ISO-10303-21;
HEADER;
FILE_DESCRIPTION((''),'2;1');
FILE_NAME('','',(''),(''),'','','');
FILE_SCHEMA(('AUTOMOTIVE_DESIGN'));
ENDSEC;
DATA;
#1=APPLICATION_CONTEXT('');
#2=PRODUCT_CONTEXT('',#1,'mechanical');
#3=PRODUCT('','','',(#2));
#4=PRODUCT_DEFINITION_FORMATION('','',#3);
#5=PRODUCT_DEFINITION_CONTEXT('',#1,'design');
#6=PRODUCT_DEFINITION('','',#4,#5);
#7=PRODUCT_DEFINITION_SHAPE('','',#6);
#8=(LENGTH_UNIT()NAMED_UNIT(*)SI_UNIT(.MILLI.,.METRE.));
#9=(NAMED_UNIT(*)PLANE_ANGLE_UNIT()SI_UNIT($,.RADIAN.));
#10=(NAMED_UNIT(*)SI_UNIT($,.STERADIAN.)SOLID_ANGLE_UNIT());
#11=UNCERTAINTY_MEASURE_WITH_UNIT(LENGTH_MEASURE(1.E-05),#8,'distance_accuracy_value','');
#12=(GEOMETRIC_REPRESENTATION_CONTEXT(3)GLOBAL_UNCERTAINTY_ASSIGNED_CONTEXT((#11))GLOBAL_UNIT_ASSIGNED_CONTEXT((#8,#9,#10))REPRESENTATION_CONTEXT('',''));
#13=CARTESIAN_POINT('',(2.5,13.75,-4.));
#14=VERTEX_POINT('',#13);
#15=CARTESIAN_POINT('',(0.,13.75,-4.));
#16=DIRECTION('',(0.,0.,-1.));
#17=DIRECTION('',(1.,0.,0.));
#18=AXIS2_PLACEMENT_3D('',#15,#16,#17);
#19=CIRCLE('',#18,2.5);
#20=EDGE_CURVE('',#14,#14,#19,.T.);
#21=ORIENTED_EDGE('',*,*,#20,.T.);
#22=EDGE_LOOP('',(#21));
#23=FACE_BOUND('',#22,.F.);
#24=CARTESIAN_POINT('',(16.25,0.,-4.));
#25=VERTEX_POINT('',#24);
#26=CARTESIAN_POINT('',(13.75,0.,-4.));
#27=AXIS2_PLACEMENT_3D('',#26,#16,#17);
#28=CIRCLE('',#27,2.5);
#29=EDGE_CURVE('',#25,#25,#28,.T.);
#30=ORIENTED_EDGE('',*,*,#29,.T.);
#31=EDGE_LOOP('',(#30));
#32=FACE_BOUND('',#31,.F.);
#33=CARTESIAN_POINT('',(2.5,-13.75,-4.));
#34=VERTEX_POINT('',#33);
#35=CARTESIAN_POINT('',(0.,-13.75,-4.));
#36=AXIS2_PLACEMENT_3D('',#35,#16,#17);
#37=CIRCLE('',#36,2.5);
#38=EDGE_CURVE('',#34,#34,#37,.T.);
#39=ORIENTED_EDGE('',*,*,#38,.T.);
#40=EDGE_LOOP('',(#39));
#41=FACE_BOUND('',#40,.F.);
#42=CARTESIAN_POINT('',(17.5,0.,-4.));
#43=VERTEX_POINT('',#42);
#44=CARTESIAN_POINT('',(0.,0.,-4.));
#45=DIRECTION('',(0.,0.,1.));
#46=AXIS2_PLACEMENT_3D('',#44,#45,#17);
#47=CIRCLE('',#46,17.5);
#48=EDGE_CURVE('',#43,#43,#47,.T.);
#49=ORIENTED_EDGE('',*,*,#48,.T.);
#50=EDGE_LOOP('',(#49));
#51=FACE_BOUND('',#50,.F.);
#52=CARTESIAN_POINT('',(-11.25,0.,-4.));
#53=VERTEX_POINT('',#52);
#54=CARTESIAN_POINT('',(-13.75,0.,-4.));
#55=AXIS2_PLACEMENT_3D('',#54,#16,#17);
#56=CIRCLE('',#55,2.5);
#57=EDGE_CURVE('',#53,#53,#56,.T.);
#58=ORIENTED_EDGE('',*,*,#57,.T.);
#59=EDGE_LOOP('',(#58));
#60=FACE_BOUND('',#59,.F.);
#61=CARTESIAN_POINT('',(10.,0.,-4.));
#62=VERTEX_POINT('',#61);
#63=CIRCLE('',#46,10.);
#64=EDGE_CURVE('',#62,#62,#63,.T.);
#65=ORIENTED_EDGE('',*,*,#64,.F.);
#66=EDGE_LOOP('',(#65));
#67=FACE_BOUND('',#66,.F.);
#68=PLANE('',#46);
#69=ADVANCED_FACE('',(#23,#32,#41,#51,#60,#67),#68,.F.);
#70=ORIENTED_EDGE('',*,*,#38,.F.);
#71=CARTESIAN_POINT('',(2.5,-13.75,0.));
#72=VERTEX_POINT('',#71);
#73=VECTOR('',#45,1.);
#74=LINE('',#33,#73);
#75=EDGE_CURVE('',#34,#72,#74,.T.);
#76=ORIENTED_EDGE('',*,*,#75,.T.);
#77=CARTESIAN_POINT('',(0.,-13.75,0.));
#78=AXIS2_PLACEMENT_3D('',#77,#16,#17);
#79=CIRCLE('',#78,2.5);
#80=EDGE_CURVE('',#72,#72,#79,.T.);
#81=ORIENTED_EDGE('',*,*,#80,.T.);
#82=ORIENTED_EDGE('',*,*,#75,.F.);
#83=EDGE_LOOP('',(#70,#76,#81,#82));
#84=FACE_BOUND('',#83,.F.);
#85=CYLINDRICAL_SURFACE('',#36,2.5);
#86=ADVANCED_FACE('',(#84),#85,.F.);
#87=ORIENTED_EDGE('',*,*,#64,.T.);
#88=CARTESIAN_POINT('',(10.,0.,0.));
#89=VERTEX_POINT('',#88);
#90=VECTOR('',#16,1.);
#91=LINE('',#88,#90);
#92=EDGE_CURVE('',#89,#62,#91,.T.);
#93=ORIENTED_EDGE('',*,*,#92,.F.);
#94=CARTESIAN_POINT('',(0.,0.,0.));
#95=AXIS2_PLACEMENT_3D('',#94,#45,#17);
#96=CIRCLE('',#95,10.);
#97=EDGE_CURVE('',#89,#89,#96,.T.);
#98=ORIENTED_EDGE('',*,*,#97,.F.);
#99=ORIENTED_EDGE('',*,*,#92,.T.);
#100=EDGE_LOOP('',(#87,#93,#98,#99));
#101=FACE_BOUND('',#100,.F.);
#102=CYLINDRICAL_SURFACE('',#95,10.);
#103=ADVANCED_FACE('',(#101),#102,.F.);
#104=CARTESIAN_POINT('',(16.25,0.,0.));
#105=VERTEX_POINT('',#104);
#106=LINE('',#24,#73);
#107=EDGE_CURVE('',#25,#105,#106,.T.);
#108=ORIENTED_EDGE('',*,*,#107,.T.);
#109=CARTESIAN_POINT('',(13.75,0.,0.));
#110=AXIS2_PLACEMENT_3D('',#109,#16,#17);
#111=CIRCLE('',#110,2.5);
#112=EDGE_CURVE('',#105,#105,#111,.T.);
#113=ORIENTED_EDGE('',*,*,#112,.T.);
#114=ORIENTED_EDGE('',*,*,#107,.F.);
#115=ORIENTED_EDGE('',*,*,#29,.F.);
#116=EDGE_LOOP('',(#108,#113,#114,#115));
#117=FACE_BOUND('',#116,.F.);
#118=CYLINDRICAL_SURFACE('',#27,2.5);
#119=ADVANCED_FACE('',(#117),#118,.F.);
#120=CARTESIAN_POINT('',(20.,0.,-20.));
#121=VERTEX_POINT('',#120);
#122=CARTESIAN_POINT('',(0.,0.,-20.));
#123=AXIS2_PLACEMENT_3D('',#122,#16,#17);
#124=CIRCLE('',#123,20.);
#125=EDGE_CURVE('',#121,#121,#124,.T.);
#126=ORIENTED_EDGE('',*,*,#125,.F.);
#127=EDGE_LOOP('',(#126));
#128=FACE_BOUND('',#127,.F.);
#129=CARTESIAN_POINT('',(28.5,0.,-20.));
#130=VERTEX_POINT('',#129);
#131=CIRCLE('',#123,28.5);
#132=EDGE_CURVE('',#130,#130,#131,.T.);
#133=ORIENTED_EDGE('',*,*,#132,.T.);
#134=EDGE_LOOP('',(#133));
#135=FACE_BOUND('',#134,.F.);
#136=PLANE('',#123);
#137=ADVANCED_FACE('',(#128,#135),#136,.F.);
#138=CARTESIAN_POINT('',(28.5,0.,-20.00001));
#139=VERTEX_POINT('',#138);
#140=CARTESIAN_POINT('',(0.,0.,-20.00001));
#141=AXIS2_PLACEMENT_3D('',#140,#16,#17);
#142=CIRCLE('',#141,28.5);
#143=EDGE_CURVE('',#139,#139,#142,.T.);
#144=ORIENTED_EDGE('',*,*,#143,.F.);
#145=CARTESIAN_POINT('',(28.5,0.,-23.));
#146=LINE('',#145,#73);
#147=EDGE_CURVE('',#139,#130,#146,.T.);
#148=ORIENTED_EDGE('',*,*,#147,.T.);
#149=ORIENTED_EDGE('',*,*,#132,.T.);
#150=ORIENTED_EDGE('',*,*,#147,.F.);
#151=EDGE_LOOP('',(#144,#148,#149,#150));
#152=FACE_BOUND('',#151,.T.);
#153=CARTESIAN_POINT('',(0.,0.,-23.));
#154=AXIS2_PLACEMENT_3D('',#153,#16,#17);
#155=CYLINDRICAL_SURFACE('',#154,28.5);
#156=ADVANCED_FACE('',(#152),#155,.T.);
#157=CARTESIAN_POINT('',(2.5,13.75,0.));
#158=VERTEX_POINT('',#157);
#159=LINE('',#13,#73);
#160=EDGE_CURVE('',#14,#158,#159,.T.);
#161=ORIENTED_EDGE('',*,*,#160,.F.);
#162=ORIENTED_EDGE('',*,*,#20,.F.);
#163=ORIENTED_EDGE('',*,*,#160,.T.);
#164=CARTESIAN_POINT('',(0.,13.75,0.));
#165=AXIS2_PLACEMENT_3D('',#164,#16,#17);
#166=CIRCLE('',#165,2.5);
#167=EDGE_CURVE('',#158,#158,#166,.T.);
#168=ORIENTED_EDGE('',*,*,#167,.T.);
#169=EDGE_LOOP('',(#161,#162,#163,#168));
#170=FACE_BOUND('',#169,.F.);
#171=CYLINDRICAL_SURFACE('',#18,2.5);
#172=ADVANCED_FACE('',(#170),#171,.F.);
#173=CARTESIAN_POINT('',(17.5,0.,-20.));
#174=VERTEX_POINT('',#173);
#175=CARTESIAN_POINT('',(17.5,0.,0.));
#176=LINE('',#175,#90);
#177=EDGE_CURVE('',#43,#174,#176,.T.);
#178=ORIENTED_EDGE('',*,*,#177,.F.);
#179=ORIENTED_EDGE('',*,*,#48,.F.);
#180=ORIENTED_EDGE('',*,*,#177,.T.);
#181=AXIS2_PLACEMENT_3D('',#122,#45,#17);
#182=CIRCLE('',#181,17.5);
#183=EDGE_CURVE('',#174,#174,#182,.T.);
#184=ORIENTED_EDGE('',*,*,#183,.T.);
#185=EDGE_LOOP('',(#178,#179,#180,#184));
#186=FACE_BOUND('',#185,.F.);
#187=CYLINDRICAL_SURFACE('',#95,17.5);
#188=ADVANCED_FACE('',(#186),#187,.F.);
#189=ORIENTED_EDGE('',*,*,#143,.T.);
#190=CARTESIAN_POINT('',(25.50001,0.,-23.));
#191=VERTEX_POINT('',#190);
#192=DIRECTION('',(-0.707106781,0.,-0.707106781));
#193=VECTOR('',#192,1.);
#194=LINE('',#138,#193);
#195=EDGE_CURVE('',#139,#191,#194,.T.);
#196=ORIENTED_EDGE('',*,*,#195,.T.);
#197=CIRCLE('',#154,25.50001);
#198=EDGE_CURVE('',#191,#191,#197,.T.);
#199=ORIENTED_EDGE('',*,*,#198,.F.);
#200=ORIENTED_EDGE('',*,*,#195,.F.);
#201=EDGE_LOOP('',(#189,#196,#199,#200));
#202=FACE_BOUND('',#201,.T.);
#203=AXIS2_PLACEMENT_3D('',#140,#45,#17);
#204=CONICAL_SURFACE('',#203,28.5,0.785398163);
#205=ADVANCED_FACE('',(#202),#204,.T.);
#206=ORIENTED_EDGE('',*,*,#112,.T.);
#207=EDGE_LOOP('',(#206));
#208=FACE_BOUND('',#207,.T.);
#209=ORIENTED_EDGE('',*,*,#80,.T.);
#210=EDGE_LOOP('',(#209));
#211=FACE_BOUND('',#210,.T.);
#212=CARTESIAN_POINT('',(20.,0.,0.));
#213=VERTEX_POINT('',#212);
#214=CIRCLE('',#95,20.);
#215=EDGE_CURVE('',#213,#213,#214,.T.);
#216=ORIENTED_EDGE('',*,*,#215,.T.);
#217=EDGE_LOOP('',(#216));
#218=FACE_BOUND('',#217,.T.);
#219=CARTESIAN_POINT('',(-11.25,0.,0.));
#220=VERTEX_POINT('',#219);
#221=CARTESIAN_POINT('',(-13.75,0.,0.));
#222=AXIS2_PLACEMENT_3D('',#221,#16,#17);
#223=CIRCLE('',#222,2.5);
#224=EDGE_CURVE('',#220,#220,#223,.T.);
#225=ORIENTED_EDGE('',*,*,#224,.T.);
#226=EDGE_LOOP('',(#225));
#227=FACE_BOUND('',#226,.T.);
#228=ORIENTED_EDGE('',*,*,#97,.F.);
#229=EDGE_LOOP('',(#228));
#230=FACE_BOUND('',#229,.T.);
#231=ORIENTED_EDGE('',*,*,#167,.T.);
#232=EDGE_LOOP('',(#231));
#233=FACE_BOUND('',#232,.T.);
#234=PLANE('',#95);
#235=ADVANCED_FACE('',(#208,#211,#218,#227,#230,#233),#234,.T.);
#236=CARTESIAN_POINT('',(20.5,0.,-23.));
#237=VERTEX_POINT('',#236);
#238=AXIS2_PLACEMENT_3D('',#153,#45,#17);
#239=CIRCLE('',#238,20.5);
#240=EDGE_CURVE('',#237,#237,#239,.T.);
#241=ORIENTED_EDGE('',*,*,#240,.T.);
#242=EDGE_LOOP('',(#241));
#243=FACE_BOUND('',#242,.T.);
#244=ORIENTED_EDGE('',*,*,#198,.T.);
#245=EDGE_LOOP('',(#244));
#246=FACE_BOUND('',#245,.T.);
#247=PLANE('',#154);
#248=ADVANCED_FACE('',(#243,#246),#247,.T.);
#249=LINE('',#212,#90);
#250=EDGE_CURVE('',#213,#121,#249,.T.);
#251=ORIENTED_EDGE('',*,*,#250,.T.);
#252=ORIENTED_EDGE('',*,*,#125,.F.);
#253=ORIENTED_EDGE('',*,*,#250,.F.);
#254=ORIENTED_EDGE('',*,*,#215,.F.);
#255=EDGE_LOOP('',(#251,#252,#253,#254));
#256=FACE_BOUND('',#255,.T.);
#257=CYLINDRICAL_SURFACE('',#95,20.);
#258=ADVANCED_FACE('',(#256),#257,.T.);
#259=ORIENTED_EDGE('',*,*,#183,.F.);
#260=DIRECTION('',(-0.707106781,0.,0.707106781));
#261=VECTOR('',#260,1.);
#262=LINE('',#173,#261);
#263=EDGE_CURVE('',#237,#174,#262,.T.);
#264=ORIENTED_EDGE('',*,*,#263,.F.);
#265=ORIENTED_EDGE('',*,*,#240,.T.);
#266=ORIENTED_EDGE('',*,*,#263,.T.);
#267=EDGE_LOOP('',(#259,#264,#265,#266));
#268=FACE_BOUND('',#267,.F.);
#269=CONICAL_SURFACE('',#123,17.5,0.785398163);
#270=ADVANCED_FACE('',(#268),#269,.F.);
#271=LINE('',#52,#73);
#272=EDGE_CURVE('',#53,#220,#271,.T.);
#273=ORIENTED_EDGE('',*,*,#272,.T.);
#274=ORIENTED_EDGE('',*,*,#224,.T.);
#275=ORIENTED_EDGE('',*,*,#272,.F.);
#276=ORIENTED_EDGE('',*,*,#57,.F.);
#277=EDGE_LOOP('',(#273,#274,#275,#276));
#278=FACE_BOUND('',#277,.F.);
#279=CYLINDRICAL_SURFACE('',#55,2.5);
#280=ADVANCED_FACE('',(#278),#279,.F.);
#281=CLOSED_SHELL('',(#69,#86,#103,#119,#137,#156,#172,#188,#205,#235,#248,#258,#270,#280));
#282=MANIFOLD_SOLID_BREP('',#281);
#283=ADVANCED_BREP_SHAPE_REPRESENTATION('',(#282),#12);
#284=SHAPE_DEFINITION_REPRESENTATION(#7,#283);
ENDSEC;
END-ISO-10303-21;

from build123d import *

# Parameters (mm, degrees)
F0_R     = 20
F0_R_2   = 17.5
F1_DEPTH = 23
F0_R_3   = 10
F2_DEPTH = 4
F3_R     = 28.5
F3_R_2   = 20
F4_DEPTH = 3
F5_R     = 2.5
F6_DEPTH = 4.001
F7_SIZE  = 2.99999
F8_SIZE  = 3


# Not quite as in the source:
# - a fillet or chamfer is up to 0.001 mm smaller than in the source, because OpenCascade refuses the exact size


with BuildPart() as f1:
    # F0 (on Top) → F1 (new body)
    with BuildSketch(Plane.XY):
        Circle(F0_R)
        Circle(F0_R_2, mode=Mode.SUBTRACT)
    extrude(amount=-F1_DEPTH)

    # F0 (on Top) → F2 (join)
    with BuildSketch(Plane.XY):
        Circle(F0_R_2)
        Circle(F0_R_3, mode=Mode.SUBTRACT)
    extrude(amount=-F2_DEPTH)

    # F3 (on face) → F4 (join)
    with BuildSketch(Plane(origin=(0, 0, -23), x_dir=(1, 0, 0), z_dir=(0, 0, -1))):
        Circle(F3_R)
        Circle(F3_R_2, mode=Mode.SUBTRACT)
    extrude(amount=-F4_DEPTH)

    # F5 (on face) → F6 (cut, through all)
    with BuildSketch(Plane(origin=(0, 0, -4), x_dir=(1, 0, 0), z_dir=(0, 0, -1))):
        with Locations((0, 13.75)):
            Circle(F5_R)
        with Locations((-13.75, 0)):
            Circle(F5_R)
        with Locations((0, -13.75)):
            Circle(F5_R)
        with Locations((13.75, 0)):
            Circle(F5_R)
    extrude(amount=-F6_DEPTH, mode=Mode.SUBTRACT)

    # F7 (size 3 in the source; OpenCascade refuses exactly that, so slightly less here)
    f7_edges = [f1.edges().sort_by_distance(p)[0] for p in [
        (-28.5, 0, -23),
    ]]
    chamfer(f7_edges, length=F7_SIZE)

    # F8
    f8_edges = [f1.edges().sort_by_distance(p)[0] for p in [
        (-17.5, 0, -23),
    ]]
    chamfer(f8_edges, length=F8_SIZE)


solid = f1.part
